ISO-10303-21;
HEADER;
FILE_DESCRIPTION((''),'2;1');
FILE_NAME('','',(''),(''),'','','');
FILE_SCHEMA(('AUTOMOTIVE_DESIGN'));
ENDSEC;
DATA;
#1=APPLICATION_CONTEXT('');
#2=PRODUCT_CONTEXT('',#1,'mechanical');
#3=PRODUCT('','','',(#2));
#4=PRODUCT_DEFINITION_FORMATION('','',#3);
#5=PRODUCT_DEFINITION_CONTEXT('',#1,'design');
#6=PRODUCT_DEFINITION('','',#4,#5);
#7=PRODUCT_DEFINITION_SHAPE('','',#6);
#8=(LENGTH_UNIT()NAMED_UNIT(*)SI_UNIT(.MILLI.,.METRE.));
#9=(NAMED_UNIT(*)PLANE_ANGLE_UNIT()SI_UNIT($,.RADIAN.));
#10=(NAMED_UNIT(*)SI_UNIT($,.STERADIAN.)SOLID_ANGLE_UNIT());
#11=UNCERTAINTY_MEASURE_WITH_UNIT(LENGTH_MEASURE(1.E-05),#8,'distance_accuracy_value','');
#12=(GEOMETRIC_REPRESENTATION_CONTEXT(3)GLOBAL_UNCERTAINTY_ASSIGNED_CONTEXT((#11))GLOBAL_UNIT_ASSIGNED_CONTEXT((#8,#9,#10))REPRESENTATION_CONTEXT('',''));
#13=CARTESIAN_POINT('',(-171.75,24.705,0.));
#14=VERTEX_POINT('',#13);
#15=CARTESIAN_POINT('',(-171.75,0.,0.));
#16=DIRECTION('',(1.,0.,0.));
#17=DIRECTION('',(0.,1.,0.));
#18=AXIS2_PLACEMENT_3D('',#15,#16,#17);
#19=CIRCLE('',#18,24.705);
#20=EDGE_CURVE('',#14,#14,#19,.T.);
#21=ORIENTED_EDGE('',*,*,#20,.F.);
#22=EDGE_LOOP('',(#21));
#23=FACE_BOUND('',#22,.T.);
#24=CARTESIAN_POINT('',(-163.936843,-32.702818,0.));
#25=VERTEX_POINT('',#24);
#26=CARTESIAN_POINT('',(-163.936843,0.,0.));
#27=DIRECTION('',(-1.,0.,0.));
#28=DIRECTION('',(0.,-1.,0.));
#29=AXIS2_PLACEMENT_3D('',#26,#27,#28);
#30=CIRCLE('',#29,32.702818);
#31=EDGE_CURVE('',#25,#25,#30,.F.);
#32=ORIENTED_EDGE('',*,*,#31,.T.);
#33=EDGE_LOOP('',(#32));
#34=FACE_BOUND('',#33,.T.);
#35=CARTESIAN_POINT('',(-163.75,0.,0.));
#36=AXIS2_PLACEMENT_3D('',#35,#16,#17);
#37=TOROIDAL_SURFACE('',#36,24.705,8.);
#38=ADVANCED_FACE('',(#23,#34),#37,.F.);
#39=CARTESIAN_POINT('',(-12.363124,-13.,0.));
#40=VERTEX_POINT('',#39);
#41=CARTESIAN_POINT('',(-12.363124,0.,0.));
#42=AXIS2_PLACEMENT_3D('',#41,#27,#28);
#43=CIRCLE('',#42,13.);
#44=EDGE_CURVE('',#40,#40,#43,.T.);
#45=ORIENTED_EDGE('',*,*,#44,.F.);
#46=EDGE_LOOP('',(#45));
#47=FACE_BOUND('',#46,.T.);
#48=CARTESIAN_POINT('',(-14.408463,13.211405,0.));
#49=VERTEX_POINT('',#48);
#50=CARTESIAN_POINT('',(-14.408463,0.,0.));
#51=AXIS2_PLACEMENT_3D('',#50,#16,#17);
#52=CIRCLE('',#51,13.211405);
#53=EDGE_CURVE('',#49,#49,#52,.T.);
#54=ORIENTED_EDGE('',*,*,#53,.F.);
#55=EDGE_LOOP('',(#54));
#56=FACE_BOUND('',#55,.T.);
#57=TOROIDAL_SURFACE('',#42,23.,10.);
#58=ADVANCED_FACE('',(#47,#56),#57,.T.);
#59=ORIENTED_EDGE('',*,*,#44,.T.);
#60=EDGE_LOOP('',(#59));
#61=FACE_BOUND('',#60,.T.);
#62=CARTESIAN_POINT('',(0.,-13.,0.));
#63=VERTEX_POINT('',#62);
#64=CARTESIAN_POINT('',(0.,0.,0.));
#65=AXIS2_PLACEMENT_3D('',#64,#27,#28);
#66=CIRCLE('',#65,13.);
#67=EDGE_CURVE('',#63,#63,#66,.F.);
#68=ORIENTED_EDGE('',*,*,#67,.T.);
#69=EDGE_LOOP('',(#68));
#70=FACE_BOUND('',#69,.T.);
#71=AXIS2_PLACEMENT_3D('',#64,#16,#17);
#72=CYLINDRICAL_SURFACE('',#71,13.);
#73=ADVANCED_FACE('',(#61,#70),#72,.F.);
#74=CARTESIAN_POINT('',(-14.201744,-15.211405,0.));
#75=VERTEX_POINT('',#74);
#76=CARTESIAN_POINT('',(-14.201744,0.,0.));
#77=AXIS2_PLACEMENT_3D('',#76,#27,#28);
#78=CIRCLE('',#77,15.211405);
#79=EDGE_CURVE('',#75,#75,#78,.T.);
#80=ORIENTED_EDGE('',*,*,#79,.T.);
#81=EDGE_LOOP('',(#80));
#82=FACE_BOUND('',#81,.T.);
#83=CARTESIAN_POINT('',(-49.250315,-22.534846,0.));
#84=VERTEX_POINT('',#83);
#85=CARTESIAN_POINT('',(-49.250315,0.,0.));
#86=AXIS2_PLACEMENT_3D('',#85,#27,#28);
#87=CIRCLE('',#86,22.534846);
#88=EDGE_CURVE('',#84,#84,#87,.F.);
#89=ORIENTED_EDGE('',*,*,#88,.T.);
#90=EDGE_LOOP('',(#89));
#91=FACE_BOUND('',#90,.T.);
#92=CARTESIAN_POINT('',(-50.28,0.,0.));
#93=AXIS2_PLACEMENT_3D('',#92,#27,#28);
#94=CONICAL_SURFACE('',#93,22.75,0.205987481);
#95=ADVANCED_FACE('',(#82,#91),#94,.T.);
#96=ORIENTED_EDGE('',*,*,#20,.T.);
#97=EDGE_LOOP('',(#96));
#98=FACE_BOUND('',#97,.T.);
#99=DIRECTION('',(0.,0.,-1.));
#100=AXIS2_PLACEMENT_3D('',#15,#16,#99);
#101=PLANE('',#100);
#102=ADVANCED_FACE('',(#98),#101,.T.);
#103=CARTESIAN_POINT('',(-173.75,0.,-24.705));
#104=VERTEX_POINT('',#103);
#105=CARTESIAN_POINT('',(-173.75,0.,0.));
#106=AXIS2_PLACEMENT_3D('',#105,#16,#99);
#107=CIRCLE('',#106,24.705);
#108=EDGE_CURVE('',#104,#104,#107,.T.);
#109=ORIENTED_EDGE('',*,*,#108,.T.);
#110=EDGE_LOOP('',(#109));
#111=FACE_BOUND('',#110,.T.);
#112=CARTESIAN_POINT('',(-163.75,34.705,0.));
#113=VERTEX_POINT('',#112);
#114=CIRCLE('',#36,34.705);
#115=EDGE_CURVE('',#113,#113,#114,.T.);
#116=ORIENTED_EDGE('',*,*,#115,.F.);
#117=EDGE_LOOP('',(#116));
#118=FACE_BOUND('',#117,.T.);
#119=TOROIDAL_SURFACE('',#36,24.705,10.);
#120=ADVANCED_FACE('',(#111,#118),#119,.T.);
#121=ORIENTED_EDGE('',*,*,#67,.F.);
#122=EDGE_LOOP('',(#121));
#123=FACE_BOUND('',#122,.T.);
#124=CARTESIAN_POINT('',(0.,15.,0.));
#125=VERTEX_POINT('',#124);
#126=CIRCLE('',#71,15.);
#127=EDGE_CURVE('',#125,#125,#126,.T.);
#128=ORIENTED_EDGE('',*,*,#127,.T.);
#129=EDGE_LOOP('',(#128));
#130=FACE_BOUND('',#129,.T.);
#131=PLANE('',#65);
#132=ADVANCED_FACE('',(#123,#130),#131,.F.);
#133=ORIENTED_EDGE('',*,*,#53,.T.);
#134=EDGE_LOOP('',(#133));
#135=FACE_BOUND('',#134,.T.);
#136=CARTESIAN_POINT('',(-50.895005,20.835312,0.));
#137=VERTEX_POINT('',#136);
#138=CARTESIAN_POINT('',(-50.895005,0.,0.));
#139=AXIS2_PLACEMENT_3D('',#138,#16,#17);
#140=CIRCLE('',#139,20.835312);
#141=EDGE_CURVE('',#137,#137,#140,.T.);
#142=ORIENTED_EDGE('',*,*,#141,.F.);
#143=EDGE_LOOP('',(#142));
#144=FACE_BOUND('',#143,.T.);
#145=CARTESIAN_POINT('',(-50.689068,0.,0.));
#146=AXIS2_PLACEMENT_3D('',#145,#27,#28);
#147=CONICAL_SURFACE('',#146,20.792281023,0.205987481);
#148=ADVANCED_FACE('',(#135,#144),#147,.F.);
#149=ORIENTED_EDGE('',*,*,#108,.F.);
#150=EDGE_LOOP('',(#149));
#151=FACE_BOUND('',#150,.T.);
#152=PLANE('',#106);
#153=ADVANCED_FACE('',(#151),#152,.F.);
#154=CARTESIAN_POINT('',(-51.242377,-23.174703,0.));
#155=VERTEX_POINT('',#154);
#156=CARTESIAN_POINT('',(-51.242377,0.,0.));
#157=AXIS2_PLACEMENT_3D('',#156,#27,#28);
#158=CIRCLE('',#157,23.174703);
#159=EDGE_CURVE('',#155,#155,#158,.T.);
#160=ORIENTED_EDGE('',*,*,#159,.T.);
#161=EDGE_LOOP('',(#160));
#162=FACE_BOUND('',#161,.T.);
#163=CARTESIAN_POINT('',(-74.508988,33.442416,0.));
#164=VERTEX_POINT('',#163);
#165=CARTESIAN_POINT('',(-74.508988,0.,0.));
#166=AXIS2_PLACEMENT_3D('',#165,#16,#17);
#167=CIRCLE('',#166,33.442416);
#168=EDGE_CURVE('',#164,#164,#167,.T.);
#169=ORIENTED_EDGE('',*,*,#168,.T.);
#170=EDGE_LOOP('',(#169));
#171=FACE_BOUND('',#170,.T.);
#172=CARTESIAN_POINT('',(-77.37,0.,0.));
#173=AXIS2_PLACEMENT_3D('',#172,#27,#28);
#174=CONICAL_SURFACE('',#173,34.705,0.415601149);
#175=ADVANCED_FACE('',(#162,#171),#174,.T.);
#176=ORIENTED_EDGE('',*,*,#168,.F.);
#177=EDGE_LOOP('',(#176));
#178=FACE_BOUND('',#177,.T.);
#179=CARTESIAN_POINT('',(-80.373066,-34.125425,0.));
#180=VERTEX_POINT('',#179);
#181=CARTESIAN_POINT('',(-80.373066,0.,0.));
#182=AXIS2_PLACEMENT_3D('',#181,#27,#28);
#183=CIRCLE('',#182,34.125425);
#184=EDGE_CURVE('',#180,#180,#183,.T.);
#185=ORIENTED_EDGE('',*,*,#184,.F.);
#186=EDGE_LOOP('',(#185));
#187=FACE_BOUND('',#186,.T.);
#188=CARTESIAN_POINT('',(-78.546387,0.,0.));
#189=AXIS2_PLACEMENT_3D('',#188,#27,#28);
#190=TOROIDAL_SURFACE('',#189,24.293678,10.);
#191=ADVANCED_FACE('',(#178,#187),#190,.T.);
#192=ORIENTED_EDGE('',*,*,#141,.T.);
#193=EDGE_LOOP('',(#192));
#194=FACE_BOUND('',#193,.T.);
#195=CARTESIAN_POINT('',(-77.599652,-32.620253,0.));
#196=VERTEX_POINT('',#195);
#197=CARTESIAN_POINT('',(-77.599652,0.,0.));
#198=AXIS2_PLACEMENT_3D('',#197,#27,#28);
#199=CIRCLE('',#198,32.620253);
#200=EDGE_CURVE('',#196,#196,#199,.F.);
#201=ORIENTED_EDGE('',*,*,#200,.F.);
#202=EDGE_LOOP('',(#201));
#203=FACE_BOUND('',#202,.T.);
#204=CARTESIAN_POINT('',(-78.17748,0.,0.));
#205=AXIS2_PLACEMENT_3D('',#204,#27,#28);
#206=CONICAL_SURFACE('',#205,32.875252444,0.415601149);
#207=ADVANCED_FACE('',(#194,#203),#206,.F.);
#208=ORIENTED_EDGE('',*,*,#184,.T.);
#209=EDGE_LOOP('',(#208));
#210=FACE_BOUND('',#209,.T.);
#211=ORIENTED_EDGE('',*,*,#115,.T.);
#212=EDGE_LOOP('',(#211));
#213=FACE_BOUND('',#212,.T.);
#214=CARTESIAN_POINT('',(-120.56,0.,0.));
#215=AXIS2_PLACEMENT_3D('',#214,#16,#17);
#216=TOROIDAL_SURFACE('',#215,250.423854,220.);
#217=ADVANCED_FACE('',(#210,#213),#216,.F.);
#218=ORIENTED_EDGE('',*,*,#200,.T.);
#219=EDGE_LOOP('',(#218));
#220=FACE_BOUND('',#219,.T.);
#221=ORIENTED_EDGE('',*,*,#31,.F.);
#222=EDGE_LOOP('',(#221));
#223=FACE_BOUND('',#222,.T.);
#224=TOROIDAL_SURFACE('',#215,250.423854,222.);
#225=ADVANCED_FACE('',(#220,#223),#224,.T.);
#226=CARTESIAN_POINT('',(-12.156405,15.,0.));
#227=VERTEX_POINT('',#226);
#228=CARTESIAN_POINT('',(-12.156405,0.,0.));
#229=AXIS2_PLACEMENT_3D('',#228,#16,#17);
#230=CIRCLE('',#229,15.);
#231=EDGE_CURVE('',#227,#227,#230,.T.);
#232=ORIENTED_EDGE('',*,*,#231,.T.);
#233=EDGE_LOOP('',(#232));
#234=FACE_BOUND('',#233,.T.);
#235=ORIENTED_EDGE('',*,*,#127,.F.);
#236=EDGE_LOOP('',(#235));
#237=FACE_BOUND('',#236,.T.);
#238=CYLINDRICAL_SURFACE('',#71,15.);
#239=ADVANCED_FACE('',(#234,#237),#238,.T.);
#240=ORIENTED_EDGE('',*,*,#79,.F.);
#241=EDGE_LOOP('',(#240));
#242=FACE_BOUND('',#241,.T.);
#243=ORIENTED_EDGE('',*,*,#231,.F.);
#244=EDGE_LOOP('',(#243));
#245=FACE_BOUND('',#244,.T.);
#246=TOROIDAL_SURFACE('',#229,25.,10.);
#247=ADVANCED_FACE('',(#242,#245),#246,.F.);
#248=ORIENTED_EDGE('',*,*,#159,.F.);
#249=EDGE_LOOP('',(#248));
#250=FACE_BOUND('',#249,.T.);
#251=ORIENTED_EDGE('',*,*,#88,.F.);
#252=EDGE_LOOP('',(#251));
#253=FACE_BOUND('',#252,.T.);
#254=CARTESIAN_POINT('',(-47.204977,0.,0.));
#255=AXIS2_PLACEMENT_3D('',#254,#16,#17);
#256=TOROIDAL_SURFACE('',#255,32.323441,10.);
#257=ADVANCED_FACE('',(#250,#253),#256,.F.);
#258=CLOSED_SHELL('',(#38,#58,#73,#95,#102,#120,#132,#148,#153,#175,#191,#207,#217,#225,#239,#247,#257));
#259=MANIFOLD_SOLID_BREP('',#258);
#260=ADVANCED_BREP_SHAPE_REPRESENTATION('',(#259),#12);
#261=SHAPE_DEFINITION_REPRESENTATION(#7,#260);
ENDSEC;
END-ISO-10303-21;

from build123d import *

# Parameters (mm, degrees)
BOSS_EXTRUDE1_START = 2
SKETCH2_R           = 24.705
BOSS_EXTRUDE1_DEPTH = 2
FILLET1_R           = 10
FILLET2_R           = 10


# Read off the part's stored shape, not the designer's step: Shell2
with BuildPart() as part:
    # Sketch1 → Revolve1 (revolve)
    with BuildSketch(Plane.XY):
        with BuildLine():
            Line((-173.75, 0), (0, 0))
            Line((0, 0), (0, 15))
            Line((0, 15), (-13.19, 15))
            Line((-13.19, 15), (-50.28, 22.75))
            Line((-50.28, 22.75), (-77.37, 34.705))
            ThreePointArc((-77.37, 34.705), (-120.56, 30.423853835), (-163.75, 34.705))
            ThreePointArc((-163.75, 34.705), (-170.821067812, 31.776067812), (-173.75, 24.705))
            Line((-173.75, 24.705), (-173.75, 0))
        make_face()
    revolve(axis=Axis((0, 0, 0), (-1, 0, 0)))

    # Shell2 outline → Shell2 (revolve, cut)
    with BuildSketch(Plane.YX):
        with BuildLine():
            Line((24.705, -173.75), (24.705, -171.75))
            ThreePointArc((24.705, -171.75), (30.295405132, -169.472531822), (32.702817817, -163.936842615))
            ThreePointArc((32.702817817, -163.936842615), (28.423955347, -120.772299747), (32.620253078, -77.599652035))
            Line((32.620253078, -77.599652035), (20.835311789, -50.895004646))
            Line((20.835311789, -50.895004646), (13, -13.396718937))
            Line((13, -13.396718937), (13, 0))
            Line((13, 0), (0, 0))
            Line((0, 0), (0, -173.75))
            Line((0, -173.75), (24.705, -173.75))
        make_face()
    revolve(axis=Axis((0, 0, 0), (1, 0, 0)), mode=Mode.SUBTRACT)

    # Sketch2 → Boss-Extrude1 (add)
    with BuildSketch(Plane(origin=(-173.75, 0, 0), x_dir=(0, 0, -1), z_dir=(1, 0, 0)).offset(BOSS_EXTRUDE1_START)):
        Circle(SKETCH2_R)
    extrude(amount=-BOSS_EXTRUDE1_DEPTH)

    # Fillet1
    fillet1_edges = [part.edges().sort_by_distance(p)[0] for p in [
        (-77.37, -34.705, 0),
        (-50.28, -22.75, 0),
        (-13.19, -15, 0),
    ]]
    fillet(fillet1_edges, radius=FILLET1_R)

    # Fillet2
    fillet2_edges = [part.edges().sort_by_distance(p)[0] for p in [
        (-13.396718937, -13, 0),
    ]]
    fillet(fillet2_edges, radius=FILLET2_R)


solid = part.part
